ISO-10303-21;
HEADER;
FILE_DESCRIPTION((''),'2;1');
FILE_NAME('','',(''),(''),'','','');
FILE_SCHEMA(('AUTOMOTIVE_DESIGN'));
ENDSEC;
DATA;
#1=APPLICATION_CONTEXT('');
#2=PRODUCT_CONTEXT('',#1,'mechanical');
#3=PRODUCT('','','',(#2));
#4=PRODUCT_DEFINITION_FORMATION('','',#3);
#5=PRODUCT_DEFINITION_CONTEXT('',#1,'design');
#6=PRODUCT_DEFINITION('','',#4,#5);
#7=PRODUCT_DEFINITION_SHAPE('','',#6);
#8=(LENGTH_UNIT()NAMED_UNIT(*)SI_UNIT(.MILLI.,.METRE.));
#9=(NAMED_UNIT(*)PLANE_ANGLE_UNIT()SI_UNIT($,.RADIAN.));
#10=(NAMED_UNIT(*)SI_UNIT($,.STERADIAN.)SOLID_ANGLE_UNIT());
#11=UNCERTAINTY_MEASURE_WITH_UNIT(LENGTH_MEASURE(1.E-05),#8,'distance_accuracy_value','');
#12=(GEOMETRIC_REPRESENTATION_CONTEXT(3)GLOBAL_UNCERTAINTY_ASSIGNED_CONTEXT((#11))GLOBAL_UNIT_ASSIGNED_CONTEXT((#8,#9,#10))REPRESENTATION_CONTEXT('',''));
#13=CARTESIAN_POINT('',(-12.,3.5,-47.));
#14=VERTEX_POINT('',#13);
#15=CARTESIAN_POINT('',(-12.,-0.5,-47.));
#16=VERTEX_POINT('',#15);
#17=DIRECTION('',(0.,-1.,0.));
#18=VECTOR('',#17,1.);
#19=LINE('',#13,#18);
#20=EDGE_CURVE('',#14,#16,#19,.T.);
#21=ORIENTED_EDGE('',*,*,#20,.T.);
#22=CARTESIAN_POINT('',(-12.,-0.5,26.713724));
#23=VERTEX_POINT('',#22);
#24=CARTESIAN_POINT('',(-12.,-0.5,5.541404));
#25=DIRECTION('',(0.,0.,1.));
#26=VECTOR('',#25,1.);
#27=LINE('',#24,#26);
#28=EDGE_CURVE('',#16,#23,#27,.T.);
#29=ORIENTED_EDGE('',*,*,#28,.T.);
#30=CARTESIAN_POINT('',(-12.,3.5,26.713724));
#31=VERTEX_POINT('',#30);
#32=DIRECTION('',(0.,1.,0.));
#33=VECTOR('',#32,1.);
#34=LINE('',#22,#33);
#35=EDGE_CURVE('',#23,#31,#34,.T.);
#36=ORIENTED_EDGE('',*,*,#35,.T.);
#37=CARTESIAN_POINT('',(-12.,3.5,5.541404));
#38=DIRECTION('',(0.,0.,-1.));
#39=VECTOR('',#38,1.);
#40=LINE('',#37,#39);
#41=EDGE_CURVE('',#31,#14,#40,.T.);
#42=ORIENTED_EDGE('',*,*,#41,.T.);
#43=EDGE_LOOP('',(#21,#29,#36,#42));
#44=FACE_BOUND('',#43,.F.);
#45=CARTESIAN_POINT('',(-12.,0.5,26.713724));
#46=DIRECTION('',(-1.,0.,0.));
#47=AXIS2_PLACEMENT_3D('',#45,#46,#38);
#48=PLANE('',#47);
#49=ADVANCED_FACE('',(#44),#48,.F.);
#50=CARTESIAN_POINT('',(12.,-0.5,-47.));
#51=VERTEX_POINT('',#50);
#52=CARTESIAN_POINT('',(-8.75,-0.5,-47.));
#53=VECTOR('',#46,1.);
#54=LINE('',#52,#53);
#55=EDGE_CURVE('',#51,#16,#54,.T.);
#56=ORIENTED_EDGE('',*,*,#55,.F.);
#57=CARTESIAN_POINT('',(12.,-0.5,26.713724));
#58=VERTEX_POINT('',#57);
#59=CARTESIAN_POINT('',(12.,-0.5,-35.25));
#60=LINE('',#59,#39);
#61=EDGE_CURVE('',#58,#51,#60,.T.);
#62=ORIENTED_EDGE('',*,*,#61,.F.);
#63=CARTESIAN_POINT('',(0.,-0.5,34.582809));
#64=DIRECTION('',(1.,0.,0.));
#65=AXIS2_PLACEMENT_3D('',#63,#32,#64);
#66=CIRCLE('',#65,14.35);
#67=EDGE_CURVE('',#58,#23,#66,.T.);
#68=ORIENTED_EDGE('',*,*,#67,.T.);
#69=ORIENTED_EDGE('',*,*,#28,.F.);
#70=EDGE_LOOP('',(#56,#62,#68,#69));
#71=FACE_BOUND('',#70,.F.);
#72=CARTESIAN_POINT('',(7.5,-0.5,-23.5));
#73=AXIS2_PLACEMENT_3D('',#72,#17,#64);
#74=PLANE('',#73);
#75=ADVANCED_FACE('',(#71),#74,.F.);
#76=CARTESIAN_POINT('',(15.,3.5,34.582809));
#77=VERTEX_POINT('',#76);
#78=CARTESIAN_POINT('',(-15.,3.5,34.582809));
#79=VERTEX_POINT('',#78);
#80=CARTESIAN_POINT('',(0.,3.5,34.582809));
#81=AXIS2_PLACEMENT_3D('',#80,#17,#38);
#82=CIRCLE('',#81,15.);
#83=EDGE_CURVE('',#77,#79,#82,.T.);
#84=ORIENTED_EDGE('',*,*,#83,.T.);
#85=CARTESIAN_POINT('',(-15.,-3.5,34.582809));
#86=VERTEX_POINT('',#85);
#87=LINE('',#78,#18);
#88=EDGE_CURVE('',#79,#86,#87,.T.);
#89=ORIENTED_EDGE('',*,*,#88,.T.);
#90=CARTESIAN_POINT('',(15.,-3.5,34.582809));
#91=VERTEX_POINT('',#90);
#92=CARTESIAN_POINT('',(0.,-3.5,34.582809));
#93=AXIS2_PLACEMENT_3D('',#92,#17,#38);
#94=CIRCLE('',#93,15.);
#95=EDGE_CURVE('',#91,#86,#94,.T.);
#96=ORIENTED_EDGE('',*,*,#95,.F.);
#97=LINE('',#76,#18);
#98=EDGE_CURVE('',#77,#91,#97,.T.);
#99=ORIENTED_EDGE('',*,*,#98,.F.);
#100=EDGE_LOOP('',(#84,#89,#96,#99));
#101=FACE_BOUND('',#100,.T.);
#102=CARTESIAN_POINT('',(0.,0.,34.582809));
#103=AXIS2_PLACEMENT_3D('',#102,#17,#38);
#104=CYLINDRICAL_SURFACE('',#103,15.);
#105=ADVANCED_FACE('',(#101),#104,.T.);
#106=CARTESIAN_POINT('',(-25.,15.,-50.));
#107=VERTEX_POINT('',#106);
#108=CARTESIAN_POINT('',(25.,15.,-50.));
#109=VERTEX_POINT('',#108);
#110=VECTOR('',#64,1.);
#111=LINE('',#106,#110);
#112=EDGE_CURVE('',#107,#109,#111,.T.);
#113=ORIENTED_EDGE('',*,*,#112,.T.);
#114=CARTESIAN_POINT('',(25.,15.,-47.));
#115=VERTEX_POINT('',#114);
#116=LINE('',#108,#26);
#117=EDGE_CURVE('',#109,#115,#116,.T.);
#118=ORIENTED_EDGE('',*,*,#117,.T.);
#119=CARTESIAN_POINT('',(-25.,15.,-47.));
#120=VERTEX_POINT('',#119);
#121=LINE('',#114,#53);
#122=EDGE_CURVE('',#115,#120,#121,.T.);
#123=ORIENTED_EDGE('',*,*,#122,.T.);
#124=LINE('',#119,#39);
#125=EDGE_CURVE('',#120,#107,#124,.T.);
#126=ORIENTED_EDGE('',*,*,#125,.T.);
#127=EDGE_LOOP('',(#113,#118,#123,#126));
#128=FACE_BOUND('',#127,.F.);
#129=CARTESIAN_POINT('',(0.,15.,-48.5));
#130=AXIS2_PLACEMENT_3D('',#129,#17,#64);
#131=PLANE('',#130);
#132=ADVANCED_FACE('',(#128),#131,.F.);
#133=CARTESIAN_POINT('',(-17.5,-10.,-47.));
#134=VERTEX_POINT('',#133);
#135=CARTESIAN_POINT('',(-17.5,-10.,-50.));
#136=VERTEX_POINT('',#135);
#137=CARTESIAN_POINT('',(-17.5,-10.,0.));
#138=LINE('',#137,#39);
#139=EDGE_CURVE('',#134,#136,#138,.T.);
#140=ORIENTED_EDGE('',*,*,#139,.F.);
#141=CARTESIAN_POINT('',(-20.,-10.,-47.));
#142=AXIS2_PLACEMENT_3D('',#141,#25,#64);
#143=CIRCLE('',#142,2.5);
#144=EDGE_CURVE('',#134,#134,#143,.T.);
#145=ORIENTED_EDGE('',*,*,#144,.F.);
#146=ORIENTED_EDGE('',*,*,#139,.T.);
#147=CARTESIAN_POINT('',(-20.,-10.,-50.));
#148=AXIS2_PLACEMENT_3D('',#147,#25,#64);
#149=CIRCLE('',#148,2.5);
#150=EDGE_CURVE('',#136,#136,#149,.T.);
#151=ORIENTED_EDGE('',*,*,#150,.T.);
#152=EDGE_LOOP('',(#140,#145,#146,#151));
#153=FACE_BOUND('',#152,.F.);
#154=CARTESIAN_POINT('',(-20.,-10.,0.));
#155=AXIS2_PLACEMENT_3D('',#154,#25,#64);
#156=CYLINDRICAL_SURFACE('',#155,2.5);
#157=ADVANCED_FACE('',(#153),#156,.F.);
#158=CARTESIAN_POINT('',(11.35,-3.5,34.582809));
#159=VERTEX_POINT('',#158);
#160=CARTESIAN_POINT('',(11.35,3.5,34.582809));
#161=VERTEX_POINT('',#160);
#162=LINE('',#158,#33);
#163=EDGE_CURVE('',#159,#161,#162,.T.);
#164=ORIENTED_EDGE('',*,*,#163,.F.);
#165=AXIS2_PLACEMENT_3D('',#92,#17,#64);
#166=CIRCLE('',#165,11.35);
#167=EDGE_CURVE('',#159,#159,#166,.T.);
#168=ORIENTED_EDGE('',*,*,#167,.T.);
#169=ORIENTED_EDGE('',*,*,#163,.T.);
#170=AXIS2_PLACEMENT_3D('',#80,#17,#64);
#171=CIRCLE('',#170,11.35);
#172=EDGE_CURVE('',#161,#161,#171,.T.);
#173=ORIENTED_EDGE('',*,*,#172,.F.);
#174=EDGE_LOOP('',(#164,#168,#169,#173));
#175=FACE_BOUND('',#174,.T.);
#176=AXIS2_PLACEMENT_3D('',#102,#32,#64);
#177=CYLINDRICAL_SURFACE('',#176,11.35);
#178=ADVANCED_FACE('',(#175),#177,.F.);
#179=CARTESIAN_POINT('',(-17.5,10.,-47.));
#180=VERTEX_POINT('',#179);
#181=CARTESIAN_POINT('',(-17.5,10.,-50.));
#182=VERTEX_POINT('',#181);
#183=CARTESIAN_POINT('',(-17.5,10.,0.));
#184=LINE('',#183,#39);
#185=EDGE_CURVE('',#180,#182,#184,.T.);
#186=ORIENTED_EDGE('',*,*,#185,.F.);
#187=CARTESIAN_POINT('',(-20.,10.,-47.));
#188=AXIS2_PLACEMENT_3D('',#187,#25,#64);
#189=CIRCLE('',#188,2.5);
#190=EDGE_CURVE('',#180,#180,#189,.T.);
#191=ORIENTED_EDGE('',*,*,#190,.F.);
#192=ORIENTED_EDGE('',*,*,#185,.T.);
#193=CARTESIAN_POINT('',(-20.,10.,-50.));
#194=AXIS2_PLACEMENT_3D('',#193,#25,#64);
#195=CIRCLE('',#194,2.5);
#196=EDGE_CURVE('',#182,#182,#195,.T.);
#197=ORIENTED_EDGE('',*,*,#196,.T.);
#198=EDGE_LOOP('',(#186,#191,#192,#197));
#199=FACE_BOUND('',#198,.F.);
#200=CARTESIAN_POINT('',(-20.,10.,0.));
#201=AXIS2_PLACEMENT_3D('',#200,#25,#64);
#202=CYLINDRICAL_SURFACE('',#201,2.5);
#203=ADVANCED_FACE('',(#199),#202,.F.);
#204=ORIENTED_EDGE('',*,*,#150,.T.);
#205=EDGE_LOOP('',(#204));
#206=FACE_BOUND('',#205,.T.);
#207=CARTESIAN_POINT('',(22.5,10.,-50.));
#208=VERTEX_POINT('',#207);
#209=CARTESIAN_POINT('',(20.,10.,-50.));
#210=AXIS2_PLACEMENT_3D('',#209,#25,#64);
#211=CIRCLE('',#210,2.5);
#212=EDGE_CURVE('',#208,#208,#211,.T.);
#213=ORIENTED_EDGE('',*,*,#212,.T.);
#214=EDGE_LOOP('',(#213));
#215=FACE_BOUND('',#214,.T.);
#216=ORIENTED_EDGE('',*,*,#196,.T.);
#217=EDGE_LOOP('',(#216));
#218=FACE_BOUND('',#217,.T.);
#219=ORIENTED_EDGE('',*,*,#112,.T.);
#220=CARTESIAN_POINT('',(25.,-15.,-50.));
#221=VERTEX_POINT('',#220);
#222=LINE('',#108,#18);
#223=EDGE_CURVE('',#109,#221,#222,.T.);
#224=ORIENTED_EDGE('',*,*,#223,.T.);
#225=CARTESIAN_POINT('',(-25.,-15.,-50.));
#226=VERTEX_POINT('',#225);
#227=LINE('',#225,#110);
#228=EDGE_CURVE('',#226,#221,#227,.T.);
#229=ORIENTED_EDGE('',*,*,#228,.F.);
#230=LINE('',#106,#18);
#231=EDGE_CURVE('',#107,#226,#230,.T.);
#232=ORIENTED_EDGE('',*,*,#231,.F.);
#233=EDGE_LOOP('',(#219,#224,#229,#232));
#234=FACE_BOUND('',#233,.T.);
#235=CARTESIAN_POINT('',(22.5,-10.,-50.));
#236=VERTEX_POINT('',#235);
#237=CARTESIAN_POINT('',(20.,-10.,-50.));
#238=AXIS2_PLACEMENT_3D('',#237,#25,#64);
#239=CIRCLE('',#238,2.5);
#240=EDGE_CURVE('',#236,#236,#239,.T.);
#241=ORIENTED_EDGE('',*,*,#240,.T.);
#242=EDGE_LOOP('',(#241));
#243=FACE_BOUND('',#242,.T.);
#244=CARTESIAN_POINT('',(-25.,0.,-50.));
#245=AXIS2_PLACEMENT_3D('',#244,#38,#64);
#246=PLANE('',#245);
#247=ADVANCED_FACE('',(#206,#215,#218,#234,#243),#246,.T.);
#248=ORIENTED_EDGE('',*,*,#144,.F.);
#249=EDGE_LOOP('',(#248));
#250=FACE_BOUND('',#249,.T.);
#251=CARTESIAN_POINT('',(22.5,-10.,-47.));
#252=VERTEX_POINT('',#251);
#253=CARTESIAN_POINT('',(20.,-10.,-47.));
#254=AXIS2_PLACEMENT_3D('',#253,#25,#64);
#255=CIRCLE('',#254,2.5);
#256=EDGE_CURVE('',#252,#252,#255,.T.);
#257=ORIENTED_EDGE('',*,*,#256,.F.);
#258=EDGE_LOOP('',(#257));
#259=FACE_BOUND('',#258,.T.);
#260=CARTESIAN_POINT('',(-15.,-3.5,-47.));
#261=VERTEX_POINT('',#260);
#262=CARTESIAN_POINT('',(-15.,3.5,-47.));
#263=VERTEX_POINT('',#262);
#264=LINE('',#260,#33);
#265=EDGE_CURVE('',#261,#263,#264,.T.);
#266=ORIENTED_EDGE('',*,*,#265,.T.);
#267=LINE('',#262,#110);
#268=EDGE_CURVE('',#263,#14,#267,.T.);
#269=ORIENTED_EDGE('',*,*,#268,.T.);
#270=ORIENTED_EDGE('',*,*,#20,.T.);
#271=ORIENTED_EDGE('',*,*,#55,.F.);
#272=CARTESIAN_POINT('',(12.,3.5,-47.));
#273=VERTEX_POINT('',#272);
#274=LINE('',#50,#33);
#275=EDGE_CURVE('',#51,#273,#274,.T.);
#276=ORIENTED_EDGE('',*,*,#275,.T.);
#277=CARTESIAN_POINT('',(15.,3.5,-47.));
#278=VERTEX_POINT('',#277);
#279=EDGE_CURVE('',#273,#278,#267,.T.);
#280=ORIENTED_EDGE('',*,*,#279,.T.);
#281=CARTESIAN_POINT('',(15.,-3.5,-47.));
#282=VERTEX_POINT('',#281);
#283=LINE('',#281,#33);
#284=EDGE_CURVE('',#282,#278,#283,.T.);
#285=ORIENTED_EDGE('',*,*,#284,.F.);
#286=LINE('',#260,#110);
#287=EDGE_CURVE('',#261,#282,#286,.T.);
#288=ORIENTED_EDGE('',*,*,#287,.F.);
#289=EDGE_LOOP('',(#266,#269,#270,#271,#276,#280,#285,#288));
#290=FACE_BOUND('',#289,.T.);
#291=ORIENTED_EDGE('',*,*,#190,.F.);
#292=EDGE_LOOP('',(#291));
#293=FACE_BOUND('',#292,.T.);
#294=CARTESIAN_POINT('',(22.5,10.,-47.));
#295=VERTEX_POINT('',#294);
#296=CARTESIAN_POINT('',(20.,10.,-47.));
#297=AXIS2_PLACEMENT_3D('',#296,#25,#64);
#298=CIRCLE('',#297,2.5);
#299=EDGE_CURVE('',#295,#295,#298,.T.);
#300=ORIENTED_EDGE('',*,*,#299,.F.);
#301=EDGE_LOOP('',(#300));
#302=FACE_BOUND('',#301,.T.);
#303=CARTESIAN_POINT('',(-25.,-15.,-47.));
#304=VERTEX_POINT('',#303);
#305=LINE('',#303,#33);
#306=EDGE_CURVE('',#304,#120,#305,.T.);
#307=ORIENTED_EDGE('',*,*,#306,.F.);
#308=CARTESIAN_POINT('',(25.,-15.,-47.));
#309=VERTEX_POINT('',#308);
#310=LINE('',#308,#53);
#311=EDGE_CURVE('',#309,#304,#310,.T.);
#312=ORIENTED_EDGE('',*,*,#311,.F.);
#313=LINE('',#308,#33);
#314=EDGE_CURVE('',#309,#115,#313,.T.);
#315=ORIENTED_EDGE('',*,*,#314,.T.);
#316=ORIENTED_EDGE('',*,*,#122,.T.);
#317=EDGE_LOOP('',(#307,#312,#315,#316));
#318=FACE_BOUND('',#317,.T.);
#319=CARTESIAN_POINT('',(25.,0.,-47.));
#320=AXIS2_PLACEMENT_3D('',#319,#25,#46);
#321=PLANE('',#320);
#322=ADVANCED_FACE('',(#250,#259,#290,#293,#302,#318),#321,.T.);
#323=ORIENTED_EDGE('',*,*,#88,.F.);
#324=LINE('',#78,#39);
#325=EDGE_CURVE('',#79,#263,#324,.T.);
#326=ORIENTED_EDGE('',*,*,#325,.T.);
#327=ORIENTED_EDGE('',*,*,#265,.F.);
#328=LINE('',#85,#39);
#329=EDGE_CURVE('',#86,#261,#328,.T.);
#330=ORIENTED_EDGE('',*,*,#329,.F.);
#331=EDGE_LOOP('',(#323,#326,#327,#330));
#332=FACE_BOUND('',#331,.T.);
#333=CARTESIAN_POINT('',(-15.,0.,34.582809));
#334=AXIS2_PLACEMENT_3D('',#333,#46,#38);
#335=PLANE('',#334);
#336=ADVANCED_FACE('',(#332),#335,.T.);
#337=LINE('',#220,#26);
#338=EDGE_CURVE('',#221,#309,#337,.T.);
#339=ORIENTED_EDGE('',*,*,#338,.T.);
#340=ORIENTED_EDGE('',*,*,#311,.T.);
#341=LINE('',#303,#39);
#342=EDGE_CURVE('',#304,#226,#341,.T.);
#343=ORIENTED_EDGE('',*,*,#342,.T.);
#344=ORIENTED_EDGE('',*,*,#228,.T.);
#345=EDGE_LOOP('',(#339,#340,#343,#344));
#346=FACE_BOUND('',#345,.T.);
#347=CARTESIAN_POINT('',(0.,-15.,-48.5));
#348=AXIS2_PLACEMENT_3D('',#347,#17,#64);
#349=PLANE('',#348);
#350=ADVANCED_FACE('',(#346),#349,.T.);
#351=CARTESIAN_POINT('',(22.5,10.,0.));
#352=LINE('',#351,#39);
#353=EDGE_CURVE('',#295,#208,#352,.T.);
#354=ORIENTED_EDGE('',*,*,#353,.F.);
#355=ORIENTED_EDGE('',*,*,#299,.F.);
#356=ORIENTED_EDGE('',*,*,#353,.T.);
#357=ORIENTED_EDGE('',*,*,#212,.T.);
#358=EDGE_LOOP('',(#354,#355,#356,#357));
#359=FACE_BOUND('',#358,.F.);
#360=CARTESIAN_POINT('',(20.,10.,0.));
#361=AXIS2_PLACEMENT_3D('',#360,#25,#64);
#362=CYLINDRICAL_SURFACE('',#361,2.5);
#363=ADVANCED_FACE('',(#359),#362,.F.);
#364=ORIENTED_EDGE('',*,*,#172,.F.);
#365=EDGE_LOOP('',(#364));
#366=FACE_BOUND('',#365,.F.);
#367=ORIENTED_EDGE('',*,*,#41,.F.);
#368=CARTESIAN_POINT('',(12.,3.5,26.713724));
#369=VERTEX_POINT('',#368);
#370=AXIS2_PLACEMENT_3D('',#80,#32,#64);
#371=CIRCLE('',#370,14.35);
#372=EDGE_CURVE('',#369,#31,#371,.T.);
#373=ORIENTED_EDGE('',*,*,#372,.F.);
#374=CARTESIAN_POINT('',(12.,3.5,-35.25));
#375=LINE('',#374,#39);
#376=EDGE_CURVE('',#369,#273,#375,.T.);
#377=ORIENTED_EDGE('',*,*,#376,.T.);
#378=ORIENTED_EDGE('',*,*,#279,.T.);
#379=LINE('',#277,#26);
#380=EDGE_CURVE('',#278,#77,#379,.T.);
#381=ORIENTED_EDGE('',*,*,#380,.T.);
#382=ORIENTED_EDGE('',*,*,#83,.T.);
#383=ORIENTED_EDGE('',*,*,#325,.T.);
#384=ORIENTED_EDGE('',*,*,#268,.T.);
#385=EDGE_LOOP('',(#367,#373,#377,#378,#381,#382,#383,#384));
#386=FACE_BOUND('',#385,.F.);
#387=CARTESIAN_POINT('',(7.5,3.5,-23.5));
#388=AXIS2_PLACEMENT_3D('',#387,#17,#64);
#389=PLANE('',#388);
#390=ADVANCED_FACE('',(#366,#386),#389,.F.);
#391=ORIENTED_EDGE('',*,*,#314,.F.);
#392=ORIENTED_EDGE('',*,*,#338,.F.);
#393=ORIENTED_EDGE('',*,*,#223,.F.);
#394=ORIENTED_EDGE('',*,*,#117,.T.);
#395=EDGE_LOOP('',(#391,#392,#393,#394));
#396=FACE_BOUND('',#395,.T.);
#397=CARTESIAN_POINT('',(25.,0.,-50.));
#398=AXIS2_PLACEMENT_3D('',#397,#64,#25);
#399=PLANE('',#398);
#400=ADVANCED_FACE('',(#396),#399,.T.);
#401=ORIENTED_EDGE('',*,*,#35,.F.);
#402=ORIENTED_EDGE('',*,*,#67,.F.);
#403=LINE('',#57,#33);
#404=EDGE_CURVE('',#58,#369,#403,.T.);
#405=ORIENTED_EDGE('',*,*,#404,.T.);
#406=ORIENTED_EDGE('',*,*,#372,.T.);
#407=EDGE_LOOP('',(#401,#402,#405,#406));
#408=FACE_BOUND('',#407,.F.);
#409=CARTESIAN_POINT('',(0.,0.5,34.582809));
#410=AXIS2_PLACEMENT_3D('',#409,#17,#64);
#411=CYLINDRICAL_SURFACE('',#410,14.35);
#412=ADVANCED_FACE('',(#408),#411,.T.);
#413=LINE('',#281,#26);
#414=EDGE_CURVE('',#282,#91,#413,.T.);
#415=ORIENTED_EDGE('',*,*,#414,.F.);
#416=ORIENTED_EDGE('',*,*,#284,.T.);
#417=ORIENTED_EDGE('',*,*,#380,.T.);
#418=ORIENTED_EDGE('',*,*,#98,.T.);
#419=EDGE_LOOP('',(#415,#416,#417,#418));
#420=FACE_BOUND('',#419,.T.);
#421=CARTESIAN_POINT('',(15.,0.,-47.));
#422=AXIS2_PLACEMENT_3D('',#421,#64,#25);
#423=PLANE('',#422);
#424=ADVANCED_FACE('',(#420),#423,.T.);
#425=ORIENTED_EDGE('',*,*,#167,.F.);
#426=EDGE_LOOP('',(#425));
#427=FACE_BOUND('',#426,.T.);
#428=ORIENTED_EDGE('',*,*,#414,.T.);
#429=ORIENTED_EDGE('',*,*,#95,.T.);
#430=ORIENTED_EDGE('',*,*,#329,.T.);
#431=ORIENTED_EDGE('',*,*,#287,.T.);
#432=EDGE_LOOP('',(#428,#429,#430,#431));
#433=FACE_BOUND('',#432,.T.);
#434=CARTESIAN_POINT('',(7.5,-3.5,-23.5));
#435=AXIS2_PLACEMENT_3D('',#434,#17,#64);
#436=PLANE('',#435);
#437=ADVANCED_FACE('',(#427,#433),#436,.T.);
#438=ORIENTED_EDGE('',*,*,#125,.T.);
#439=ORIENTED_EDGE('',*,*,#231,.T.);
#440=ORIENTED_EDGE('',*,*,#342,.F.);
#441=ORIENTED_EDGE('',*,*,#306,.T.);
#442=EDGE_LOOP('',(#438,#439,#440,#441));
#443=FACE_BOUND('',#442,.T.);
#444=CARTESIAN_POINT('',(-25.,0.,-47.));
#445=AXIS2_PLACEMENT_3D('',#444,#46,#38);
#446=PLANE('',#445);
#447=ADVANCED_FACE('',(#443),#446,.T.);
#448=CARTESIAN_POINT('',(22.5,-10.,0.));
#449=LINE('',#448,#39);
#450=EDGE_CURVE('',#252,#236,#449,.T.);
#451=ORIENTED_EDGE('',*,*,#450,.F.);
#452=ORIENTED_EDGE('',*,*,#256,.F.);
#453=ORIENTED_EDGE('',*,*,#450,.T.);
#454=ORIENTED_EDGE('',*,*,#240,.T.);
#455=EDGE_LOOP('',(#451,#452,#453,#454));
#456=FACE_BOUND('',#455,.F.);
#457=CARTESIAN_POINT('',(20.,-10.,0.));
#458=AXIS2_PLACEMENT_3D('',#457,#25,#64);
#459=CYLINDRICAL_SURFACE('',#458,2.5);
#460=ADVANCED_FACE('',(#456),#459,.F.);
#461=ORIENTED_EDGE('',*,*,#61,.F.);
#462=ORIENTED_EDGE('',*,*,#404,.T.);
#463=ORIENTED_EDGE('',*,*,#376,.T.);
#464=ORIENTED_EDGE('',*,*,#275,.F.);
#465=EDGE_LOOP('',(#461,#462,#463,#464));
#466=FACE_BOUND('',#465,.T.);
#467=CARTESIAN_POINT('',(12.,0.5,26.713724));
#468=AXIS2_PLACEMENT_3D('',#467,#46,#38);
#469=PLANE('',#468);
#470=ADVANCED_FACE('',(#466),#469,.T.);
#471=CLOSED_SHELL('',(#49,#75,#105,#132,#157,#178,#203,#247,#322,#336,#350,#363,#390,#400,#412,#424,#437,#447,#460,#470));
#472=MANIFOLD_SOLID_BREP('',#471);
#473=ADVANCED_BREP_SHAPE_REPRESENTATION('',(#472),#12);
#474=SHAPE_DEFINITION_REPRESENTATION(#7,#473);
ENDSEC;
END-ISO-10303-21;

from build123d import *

# Parameters (mm, degrees)
F0_W     = 15
F0_H     = 47
F0_R     = 11.35
F1_DEPTH = 3.5
F2_DEPTH = 15
F3_T     = -3
F4_R     = 2.5
F5_DEPTH = 56


# Not quite as in the source:
# - a shell that OpenCascade refuses in one call is made with other operations: the cavity is built on its own and cut out


with BuildPart() as f1:
    # F0 (on Front) → F1 (new body, symmetric)
    with BuildSketch(Plane.XZ):
        with Locations((7.5, -23.5)):
            Rectangle(F0_W, F0_H)
        with BuildLine():
            Line((0, 0), (15, 0))
            Line((15, 0), (15, 34.5828086023))
            ThreePointArc((15, 34.5828086023), (10.6066017178, 23.9762068845), (0, 19.5828086023))
            Line((0, 19.5828086023), (0, 0))
        make_face()
        with BuildLine():
            ThreePointArc((15, 34.5828086023), (0, 49.5828086023), (-15, 34.5828086023))
            ThreePointArc((-15, 34.5828086023), (-10.6066017178, 23.9762068845), (0, 19.5828086023))
            ThreePointArc((0, 19.5828086023), (10.6066017178, 23.9762068845), (15, 34.5828086023))
        make_face()
        with Locations((0, 34.5828086023)):
            Circle(F0_R, mode=Mode.SUBTRACT)
        with BuildLine():
            Line((-15, 34.5828086023), (-15, 0))
            Line((-15, 0), (0, 0))
            Line((0, 0), (0, 19.5828086023))
            ThreePointArc((0, 19.5828086023), (-10.6066017178, 23.9762068845), (-15, 34.5828086023))
        make_face()
        with Locations((-7.5, -23.5)):
            Rectangle(F0_W, F0_H)
    extrude(amount=F1_DEPTH, both=True)

    # F0 (on Front) → F2 (join, symmetric)
    with BuildSketch(Plane.XZ):
        Polygon((-25, -47), (-25, -50), (25, -50), (25, -47), (15, -47), (0, -47), (-15, -47), align=None)
    extrude(amount=F2_DEPTH, both=True)

    # F3: a shell. OpenCascade refuses it in one call, so the cavity is built on its own and cut out:
    # the body offset inwards by the wall thickness, plus a prism from it out through each open face.
    f3_core = offset(f1.part, amount=F3_T, kind=Kind.INTERSECTION, mode=Mode.PRIVATE)
    f3_exits = [f3_core.faces().sort_by_distance(p)[0] for p in [
        (0, 0.5, -12.400343),
    ]]
    add(f3_core, mode=Mode.SUBTRACT)
    extrude(f3_exits, amount=-F3_T, mode=Mode.SUBTRACT)

    # F4 (on Top) → F5 (cut)
    with BuildSketch(Plane.XY):
        with Locations((20, 10)):
            Circle(F4_R)
        with Locations((-20, 10)):
            Circle(F4_R)
        with Locations((-20, -10)):
            Circle(F4_R)
        with Locations((20, -10)):
            Circle(F4_R)
    extrude(amount=-F5_DEPTH, mode=Mode.SUBTRACT)


solid = f1.part
